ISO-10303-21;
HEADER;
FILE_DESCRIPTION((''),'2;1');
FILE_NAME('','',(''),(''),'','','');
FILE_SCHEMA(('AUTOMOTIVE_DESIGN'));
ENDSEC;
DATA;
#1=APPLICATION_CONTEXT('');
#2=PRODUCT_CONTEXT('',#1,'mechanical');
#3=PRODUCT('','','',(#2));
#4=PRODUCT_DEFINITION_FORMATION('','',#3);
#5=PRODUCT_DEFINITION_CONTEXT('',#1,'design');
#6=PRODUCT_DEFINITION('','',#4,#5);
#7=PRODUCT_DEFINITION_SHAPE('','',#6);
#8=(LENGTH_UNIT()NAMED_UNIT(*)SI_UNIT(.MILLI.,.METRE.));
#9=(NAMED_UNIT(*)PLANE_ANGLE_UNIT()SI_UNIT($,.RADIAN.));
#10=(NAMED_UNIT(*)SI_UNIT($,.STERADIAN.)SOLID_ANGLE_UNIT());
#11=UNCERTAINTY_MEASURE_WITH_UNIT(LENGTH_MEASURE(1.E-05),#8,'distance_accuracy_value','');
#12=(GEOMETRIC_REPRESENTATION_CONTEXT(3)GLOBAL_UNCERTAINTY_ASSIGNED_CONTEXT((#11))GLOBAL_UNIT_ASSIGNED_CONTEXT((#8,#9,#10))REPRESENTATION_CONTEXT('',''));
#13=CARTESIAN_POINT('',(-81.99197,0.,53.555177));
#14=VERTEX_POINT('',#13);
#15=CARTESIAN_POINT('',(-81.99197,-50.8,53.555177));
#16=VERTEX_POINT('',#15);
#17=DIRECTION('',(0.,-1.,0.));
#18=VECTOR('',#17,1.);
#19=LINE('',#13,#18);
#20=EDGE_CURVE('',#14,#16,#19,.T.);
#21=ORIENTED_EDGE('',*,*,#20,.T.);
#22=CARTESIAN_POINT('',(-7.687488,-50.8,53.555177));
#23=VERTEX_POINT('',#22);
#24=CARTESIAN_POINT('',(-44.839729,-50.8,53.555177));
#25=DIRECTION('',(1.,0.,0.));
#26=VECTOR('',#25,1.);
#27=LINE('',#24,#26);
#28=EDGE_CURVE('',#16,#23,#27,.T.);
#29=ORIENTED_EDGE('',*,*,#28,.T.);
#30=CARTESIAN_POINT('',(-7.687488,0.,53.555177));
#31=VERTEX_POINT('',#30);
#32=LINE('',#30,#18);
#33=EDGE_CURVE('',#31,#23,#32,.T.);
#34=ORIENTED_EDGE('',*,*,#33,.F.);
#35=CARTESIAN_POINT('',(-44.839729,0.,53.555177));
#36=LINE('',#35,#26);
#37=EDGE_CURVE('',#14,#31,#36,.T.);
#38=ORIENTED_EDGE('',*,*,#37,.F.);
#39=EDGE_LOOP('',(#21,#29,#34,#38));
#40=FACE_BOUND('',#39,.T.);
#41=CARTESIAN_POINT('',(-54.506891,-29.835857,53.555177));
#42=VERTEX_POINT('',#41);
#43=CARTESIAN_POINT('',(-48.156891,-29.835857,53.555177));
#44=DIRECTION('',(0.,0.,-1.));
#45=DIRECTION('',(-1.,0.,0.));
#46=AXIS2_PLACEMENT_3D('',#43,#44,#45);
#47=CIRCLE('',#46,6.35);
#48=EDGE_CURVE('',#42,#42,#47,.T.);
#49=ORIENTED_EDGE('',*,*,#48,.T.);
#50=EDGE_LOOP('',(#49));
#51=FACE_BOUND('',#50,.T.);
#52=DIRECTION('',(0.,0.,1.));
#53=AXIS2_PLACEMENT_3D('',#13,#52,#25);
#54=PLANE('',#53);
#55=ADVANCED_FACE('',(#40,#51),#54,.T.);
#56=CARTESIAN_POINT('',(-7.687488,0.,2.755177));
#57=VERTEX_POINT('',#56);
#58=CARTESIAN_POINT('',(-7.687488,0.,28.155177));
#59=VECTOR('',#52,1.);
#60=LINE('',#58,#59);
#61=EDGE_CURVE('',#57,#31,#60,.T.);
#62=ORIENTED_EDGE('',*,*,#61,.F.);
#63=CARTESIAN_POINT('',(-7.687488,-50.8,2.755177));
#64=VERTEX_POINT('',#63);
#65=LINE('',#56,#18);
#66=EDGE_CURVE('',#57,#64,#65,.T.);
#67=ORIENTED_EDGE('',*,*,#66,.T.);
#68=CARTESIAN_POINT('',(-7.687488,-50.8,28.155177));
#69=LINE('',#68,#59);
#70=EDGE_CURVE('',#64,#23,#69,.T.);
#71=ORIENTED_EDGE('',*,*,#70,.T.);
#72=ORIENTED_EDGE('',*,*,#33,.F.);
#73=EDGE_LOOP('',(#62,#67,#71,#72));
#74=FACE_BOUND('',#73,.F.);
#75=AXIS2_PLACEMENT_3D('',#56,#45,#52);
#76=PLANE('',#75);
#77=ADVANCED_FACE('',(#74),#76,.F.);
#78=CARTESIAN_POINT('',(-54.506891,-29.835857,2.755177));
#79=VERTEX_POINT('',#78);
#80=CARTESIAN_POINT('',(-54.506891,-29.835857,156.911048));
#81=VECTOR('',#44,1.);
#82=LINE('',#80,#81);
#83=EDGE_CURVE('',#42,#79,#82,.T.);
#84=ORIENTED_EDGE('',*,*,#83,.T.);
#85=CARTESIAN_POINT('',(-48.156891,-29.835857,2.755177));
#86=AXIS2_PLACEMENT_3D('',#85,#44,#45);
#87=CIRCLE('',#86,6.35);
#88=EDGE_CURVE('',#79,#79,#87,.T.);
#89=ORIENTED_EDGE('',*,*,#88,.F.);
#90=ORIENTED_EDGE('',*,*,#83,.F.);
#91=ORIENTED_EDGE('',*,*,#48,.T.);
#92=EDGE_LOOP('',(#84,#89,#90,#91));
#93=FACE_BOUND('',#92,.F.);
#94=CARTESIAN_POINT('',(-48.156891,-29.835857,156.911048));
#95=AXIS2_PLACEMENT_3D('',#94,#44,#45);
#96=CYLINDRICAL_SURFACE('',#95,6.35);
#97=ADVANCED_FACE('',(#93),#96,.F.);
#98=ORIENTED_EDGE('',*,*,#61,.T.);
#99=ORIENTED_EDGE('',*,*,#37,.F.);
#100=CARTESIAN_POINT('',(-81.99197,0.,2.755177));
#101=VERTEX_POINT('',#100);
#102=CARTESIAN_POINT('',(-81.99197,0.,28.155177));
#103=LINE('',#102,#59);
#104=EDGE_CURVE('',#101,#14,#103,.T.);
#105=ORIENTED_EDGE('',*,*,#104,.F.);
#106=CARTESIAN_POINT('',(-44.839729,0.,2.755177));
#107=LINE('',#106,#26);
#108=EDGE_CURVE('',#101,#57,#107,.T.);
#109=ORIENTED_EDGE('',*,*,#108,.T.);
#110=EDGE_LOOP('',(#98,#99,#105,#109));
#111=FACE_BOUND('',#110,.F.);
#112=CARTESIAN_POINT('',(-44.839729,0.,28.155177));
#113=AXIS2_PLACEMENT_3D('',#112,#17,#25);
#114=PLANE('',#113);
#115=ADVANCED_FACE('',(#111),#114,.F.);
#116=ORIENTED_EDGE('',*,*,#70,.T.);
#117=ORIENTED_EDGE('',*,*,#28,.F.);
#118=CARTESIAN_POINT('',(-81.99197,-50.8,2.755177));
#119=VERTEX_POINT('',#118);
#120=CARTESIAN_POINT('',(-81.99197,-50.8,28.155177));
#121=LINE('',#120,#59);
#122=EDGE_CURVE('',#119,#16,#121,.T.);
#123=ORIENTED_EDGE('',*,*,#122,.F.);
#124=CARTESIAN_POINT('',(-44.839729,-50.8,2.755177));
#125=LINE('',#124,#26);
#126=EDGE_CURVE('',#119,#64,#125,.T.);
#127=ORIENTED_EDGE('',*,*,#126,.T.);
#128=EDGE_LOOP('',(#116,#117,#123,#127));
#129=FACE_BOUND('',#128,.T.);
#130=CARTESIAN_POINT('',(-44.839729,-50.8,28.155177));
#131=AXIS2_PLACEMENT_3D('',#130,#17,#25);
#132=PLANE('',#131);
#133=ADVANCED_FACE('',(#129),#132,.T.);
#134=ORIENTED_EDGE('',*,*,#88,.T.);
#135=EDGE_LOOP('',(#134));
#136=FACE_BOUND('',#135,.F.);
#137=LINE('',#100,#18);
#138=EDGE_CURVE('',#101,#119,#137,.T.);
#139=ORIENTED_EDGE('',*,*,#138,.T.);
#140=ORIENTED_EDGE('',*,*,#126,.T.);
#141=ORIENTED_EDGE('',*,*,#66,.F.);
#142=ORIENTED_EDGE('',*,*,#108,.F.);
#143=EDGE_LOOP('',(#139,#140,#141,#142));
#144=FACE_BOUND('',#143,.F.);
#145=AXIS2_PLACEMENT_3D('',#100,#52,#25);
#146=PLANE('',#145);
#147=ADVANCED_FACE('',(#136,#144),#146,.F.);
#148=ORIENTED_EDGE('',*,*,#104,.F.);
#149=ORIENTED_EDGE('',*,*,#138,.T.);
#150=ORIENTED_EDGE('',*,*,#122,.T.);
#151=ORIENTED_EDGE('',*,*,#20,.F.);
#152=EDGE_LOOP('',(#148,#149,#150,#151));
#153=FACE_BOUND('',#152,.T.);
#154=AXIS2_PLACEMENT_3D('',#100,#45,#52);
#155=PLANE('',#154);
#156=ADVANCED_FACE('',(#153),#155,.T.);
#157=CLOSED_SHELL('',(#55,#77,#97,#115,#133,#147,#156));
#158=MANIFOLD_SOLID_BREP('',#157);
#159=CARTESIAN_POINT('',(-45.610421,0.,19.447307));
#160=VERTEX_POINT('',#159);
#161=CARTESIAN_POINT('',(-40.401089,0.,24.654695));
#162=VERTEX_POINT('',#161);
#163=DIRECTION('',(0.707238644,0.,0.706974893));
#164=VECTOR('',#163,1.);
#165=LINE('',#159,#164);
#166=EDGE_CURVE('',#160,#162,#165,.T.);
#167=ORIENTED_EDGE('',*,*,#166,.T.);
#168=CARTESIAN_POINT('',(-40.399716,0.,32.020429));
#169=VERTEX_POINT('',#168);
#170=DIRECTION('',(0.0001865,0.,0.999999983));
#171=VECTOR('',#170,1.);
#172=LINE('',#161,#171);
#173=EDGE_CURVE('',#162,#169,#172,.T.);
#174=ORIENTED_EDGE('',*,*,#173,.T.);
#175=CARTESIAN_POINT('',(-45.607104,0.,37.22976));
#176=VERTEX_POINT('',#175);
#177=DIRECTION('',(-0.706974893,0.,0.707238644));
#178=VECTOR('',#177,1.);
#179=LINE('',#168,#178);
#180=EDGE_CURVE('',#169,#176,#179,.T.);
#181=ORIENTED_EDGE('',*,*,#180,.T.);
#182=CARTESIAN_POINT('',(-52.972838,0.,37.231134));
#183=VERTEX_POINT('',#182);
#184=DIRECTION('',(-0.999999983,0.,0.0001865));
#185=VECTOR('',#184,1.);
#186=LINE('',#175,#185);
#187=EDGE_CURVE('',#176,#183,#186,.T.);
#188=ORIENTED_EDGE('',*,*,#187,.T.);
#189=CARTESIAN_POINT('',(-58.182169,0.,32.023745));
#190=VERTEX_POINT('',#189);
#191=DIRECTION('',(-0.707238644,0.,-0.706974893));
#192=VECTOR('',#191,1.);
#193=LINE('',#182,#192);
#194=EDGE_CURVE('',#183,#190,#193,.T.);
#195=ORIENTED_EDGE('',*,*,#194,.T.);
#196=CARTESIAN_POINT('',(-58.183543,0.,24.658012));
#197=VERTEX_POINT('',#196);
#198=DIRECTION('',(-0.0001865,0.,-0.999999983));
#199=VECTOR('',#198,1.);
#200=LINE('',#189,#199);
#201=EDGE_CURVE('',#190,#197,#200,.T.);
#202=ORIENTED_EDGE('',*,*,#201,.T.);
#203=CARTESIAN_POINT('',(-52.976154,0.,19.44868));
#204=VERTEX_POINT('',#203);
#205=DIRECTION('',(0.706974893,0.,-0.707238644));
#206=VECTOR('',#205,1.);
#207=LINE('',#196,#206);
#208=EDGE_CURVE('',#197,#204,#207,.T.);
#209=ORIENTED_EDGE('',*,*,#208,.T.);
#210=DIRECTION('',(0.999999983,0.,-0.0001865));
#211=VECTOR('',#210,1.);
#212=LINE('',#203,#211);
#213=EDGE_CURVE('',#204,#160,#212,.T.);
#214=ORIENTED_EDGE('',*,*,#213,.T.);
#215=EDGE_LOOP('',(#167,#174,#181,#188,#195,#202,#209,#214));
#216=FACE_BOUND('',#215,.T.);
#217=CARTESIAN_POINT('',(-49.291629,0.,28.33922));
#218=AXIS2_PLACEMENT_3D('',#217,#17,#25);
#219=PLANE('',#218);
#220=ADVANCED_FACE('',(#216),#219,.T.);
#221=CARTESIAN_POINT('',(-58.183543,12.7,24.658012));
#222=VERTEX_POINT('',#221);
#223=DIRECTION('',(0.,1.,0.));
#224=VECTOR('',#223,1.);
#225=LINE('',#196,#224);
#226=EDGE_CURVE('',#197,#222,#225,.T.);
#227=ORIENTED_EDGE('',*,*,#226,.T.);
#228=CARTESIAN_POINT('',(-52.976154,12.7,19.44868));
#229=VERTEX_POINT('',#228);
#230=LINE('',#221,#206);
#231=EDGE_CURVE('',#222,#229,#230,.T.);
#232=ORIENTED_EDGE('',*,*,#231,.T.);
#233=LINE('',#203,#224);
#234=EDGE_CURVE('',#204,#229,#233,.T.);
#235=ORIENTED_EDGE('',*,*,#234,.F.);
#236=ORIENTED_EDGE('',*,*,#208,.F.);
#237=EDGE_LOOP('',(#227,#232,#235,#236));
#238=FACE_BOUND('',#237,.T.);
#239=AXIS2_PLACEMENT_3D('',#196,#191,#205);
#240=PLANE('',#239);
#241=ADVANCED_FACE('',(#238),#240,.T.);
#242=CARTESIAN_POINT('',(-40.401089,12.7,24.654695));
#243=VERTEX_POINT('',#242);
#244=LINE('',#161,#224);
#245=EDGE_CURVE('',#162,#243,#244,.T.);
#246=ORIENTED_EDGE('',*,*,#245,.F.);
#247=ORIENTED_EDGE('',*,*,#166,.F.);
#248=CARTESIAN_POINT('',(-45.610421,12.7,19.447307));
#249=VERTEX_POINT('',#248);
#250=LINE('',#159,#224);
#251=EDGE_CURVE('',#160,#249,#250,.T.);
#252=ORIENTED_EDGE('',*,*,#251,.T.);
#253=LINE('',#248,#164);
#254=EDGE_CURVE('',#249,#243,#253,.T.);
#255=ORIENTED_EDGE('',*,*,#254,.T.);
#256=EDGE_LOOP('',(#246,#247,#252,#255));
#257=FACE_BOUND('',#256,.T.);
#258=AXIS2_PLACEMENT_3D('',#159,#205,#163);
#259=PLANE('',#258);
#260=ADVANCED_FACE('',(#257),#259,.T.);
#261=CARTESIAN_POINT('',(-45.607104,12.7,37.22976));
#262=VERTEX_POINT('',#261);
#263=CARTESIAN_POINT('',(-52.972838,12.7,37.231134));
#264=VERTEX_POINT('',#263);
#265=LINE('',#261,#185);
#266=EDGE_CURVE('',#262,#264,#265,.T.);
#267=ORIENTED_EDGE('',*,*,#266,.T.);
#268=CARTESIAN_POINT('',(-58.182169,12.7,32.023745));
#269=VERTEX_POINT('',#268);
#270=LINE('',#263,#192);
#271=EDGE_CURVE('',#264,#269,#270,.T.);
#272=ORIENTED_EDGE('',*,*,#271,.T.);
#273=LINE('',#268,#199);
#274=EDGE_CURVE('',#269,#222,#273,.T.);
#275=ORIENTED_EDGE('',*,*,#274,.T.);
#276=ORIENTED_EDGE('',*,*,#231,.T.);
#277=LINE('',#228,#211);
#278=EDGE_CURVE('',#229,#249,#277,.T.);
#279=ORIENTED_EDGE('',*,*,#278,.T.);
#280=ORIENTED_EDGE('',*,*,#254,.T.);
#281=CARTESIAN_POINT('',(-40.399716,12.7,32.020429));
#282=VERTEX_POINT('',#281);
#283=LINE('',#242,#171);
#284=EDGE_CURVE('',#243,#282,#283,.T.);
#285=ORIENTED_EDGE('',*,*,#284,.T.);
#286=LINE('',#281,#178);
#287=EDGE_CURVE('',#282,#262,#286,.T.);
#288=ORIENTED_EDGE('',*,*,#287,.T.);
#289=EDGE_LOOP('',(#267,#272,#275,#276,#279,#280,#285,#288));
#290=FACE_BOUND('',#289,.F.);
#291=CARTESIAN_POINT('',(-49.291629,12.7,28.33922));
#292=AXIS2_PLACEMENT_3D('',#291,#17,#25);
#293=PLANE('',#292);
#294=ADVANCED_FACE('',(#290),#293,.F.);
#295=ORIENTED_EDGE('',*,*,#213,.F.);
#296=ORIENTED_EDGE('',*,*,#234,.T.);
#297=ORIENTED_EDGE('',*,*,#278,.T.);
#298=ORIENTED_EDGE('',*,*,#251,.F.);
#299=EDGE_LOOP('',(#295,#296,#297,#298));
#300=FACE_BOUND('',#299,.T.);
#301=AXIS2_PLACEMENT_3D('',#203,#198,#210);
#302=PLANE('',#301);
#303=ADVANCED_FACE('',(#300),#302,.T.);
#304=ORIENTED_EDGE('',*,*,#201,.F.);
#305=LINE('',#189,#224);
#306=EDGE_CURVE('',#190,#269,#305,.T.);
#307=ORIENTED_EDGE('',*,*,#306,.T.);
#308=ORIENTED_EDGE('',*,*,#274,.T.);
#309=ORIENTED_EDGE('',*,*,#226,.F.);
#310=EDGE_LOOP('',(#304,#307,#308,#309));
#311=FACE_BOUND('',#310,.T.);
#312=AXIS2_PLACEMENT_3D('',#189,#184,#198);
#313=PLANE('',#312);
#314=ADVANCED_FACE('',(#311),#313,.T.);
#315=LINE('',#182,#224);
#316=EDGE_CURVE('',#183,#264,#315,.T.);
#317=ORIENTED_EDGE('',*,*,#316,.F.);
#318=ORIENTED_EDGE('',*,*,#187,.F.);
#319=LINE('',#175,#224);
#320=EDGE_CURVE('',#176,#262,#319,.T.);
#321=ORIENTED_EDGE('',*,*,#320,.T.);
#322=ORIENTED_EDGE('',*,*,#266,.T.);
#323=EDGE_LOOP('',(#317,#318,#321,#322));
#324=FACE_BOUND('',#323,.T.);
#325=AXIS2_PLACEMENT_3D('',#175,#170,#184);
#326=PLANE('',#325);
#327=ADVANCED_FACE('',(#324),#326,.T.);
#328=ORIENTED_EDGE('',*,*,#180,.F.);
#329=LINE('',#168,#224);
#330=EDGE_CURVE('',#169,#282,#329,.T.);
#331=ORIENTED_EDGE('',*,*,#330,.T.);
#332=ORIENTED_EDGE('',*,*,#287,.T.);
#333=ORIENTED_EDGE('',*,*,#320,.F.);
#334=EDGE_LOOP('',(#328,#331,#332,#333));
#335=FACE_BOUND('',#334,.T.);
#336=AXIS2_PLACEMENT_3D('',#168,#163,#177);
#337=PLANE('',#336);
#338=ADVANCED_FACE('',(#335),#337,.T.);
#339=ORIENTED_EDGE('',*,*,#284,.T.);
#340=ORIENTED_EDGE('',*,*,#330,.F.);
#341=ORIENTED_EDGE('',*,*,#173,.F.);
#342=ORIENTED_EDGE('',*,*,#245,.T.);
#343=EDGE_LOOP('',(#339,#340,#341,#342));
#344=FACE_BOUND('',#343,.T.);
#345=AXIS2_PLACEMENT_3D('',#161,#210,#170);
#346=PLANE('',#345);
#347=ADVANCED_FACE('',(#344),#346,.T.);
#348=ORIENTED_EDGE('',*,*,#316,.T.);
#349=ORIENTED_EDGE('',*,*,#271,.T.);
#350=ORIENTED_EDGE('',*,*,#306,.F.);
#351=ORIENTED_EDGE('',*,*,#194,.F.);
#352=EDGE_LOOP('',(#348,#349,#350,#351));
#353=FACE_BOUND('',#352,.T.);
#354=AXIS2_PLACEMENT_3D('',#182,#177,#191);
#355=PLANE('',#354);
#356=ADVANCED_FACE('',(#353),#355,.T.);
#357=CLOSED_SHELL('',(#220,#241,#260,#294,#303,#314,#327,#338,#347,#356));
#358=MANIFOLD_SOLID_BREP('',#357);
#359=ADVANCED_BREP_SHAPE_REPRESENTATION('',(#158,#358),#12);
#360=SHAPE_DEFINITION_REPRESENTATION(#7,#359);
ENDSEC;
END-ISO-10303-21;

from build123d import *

# Parameters (mm, degrees)
F0_W     = 74.3044822258
F0_H     = 50.8
F1_DEPTH = 50.8
F5_D     = 12.7
F7_DEPTH = 12.7


# Not quite as in the source:
# - the program builds the solid bodies; features that only make, move or delete a surface that nothing else refers to are left out


with BuildPart() as f1:
    # F0 (on Front) → F1 (new body)
    with BuildSketch(Plane.XZ):
        with Locations((-44.8397286236, 28.155177366)):
            Rectangle(F0_W, F0_H)
    extrude(amount=F1_DEPTH)

    # F5 (through all)
    with Locations(Plane.XY.offset(53.555177366)):
        with Locations((-48.1568910182, -29.835857451)):
            Hole(F5_D / 2)


with BuildPart() as f7:
    # F6 (on face) → F7 (new body)
    with BuildSketch(Plane.XZ):
        Polygon((-40.3997157671, 32.0204286902), (-45.6071044348, 37.2297600777), (-52.9728378235, 37.231133788), (-58.182169211, 32.0237451204), (-58.1835429214, 24.6580117316), (-52.9761542537, 19.4486803441), (-45.6104208649, 19.4473066338), (-40.4010894774, 24.6546953015), align=None)
    extrude(amount=-F7_DEPTH)


solid = Compound([f1.part, f7.part])
